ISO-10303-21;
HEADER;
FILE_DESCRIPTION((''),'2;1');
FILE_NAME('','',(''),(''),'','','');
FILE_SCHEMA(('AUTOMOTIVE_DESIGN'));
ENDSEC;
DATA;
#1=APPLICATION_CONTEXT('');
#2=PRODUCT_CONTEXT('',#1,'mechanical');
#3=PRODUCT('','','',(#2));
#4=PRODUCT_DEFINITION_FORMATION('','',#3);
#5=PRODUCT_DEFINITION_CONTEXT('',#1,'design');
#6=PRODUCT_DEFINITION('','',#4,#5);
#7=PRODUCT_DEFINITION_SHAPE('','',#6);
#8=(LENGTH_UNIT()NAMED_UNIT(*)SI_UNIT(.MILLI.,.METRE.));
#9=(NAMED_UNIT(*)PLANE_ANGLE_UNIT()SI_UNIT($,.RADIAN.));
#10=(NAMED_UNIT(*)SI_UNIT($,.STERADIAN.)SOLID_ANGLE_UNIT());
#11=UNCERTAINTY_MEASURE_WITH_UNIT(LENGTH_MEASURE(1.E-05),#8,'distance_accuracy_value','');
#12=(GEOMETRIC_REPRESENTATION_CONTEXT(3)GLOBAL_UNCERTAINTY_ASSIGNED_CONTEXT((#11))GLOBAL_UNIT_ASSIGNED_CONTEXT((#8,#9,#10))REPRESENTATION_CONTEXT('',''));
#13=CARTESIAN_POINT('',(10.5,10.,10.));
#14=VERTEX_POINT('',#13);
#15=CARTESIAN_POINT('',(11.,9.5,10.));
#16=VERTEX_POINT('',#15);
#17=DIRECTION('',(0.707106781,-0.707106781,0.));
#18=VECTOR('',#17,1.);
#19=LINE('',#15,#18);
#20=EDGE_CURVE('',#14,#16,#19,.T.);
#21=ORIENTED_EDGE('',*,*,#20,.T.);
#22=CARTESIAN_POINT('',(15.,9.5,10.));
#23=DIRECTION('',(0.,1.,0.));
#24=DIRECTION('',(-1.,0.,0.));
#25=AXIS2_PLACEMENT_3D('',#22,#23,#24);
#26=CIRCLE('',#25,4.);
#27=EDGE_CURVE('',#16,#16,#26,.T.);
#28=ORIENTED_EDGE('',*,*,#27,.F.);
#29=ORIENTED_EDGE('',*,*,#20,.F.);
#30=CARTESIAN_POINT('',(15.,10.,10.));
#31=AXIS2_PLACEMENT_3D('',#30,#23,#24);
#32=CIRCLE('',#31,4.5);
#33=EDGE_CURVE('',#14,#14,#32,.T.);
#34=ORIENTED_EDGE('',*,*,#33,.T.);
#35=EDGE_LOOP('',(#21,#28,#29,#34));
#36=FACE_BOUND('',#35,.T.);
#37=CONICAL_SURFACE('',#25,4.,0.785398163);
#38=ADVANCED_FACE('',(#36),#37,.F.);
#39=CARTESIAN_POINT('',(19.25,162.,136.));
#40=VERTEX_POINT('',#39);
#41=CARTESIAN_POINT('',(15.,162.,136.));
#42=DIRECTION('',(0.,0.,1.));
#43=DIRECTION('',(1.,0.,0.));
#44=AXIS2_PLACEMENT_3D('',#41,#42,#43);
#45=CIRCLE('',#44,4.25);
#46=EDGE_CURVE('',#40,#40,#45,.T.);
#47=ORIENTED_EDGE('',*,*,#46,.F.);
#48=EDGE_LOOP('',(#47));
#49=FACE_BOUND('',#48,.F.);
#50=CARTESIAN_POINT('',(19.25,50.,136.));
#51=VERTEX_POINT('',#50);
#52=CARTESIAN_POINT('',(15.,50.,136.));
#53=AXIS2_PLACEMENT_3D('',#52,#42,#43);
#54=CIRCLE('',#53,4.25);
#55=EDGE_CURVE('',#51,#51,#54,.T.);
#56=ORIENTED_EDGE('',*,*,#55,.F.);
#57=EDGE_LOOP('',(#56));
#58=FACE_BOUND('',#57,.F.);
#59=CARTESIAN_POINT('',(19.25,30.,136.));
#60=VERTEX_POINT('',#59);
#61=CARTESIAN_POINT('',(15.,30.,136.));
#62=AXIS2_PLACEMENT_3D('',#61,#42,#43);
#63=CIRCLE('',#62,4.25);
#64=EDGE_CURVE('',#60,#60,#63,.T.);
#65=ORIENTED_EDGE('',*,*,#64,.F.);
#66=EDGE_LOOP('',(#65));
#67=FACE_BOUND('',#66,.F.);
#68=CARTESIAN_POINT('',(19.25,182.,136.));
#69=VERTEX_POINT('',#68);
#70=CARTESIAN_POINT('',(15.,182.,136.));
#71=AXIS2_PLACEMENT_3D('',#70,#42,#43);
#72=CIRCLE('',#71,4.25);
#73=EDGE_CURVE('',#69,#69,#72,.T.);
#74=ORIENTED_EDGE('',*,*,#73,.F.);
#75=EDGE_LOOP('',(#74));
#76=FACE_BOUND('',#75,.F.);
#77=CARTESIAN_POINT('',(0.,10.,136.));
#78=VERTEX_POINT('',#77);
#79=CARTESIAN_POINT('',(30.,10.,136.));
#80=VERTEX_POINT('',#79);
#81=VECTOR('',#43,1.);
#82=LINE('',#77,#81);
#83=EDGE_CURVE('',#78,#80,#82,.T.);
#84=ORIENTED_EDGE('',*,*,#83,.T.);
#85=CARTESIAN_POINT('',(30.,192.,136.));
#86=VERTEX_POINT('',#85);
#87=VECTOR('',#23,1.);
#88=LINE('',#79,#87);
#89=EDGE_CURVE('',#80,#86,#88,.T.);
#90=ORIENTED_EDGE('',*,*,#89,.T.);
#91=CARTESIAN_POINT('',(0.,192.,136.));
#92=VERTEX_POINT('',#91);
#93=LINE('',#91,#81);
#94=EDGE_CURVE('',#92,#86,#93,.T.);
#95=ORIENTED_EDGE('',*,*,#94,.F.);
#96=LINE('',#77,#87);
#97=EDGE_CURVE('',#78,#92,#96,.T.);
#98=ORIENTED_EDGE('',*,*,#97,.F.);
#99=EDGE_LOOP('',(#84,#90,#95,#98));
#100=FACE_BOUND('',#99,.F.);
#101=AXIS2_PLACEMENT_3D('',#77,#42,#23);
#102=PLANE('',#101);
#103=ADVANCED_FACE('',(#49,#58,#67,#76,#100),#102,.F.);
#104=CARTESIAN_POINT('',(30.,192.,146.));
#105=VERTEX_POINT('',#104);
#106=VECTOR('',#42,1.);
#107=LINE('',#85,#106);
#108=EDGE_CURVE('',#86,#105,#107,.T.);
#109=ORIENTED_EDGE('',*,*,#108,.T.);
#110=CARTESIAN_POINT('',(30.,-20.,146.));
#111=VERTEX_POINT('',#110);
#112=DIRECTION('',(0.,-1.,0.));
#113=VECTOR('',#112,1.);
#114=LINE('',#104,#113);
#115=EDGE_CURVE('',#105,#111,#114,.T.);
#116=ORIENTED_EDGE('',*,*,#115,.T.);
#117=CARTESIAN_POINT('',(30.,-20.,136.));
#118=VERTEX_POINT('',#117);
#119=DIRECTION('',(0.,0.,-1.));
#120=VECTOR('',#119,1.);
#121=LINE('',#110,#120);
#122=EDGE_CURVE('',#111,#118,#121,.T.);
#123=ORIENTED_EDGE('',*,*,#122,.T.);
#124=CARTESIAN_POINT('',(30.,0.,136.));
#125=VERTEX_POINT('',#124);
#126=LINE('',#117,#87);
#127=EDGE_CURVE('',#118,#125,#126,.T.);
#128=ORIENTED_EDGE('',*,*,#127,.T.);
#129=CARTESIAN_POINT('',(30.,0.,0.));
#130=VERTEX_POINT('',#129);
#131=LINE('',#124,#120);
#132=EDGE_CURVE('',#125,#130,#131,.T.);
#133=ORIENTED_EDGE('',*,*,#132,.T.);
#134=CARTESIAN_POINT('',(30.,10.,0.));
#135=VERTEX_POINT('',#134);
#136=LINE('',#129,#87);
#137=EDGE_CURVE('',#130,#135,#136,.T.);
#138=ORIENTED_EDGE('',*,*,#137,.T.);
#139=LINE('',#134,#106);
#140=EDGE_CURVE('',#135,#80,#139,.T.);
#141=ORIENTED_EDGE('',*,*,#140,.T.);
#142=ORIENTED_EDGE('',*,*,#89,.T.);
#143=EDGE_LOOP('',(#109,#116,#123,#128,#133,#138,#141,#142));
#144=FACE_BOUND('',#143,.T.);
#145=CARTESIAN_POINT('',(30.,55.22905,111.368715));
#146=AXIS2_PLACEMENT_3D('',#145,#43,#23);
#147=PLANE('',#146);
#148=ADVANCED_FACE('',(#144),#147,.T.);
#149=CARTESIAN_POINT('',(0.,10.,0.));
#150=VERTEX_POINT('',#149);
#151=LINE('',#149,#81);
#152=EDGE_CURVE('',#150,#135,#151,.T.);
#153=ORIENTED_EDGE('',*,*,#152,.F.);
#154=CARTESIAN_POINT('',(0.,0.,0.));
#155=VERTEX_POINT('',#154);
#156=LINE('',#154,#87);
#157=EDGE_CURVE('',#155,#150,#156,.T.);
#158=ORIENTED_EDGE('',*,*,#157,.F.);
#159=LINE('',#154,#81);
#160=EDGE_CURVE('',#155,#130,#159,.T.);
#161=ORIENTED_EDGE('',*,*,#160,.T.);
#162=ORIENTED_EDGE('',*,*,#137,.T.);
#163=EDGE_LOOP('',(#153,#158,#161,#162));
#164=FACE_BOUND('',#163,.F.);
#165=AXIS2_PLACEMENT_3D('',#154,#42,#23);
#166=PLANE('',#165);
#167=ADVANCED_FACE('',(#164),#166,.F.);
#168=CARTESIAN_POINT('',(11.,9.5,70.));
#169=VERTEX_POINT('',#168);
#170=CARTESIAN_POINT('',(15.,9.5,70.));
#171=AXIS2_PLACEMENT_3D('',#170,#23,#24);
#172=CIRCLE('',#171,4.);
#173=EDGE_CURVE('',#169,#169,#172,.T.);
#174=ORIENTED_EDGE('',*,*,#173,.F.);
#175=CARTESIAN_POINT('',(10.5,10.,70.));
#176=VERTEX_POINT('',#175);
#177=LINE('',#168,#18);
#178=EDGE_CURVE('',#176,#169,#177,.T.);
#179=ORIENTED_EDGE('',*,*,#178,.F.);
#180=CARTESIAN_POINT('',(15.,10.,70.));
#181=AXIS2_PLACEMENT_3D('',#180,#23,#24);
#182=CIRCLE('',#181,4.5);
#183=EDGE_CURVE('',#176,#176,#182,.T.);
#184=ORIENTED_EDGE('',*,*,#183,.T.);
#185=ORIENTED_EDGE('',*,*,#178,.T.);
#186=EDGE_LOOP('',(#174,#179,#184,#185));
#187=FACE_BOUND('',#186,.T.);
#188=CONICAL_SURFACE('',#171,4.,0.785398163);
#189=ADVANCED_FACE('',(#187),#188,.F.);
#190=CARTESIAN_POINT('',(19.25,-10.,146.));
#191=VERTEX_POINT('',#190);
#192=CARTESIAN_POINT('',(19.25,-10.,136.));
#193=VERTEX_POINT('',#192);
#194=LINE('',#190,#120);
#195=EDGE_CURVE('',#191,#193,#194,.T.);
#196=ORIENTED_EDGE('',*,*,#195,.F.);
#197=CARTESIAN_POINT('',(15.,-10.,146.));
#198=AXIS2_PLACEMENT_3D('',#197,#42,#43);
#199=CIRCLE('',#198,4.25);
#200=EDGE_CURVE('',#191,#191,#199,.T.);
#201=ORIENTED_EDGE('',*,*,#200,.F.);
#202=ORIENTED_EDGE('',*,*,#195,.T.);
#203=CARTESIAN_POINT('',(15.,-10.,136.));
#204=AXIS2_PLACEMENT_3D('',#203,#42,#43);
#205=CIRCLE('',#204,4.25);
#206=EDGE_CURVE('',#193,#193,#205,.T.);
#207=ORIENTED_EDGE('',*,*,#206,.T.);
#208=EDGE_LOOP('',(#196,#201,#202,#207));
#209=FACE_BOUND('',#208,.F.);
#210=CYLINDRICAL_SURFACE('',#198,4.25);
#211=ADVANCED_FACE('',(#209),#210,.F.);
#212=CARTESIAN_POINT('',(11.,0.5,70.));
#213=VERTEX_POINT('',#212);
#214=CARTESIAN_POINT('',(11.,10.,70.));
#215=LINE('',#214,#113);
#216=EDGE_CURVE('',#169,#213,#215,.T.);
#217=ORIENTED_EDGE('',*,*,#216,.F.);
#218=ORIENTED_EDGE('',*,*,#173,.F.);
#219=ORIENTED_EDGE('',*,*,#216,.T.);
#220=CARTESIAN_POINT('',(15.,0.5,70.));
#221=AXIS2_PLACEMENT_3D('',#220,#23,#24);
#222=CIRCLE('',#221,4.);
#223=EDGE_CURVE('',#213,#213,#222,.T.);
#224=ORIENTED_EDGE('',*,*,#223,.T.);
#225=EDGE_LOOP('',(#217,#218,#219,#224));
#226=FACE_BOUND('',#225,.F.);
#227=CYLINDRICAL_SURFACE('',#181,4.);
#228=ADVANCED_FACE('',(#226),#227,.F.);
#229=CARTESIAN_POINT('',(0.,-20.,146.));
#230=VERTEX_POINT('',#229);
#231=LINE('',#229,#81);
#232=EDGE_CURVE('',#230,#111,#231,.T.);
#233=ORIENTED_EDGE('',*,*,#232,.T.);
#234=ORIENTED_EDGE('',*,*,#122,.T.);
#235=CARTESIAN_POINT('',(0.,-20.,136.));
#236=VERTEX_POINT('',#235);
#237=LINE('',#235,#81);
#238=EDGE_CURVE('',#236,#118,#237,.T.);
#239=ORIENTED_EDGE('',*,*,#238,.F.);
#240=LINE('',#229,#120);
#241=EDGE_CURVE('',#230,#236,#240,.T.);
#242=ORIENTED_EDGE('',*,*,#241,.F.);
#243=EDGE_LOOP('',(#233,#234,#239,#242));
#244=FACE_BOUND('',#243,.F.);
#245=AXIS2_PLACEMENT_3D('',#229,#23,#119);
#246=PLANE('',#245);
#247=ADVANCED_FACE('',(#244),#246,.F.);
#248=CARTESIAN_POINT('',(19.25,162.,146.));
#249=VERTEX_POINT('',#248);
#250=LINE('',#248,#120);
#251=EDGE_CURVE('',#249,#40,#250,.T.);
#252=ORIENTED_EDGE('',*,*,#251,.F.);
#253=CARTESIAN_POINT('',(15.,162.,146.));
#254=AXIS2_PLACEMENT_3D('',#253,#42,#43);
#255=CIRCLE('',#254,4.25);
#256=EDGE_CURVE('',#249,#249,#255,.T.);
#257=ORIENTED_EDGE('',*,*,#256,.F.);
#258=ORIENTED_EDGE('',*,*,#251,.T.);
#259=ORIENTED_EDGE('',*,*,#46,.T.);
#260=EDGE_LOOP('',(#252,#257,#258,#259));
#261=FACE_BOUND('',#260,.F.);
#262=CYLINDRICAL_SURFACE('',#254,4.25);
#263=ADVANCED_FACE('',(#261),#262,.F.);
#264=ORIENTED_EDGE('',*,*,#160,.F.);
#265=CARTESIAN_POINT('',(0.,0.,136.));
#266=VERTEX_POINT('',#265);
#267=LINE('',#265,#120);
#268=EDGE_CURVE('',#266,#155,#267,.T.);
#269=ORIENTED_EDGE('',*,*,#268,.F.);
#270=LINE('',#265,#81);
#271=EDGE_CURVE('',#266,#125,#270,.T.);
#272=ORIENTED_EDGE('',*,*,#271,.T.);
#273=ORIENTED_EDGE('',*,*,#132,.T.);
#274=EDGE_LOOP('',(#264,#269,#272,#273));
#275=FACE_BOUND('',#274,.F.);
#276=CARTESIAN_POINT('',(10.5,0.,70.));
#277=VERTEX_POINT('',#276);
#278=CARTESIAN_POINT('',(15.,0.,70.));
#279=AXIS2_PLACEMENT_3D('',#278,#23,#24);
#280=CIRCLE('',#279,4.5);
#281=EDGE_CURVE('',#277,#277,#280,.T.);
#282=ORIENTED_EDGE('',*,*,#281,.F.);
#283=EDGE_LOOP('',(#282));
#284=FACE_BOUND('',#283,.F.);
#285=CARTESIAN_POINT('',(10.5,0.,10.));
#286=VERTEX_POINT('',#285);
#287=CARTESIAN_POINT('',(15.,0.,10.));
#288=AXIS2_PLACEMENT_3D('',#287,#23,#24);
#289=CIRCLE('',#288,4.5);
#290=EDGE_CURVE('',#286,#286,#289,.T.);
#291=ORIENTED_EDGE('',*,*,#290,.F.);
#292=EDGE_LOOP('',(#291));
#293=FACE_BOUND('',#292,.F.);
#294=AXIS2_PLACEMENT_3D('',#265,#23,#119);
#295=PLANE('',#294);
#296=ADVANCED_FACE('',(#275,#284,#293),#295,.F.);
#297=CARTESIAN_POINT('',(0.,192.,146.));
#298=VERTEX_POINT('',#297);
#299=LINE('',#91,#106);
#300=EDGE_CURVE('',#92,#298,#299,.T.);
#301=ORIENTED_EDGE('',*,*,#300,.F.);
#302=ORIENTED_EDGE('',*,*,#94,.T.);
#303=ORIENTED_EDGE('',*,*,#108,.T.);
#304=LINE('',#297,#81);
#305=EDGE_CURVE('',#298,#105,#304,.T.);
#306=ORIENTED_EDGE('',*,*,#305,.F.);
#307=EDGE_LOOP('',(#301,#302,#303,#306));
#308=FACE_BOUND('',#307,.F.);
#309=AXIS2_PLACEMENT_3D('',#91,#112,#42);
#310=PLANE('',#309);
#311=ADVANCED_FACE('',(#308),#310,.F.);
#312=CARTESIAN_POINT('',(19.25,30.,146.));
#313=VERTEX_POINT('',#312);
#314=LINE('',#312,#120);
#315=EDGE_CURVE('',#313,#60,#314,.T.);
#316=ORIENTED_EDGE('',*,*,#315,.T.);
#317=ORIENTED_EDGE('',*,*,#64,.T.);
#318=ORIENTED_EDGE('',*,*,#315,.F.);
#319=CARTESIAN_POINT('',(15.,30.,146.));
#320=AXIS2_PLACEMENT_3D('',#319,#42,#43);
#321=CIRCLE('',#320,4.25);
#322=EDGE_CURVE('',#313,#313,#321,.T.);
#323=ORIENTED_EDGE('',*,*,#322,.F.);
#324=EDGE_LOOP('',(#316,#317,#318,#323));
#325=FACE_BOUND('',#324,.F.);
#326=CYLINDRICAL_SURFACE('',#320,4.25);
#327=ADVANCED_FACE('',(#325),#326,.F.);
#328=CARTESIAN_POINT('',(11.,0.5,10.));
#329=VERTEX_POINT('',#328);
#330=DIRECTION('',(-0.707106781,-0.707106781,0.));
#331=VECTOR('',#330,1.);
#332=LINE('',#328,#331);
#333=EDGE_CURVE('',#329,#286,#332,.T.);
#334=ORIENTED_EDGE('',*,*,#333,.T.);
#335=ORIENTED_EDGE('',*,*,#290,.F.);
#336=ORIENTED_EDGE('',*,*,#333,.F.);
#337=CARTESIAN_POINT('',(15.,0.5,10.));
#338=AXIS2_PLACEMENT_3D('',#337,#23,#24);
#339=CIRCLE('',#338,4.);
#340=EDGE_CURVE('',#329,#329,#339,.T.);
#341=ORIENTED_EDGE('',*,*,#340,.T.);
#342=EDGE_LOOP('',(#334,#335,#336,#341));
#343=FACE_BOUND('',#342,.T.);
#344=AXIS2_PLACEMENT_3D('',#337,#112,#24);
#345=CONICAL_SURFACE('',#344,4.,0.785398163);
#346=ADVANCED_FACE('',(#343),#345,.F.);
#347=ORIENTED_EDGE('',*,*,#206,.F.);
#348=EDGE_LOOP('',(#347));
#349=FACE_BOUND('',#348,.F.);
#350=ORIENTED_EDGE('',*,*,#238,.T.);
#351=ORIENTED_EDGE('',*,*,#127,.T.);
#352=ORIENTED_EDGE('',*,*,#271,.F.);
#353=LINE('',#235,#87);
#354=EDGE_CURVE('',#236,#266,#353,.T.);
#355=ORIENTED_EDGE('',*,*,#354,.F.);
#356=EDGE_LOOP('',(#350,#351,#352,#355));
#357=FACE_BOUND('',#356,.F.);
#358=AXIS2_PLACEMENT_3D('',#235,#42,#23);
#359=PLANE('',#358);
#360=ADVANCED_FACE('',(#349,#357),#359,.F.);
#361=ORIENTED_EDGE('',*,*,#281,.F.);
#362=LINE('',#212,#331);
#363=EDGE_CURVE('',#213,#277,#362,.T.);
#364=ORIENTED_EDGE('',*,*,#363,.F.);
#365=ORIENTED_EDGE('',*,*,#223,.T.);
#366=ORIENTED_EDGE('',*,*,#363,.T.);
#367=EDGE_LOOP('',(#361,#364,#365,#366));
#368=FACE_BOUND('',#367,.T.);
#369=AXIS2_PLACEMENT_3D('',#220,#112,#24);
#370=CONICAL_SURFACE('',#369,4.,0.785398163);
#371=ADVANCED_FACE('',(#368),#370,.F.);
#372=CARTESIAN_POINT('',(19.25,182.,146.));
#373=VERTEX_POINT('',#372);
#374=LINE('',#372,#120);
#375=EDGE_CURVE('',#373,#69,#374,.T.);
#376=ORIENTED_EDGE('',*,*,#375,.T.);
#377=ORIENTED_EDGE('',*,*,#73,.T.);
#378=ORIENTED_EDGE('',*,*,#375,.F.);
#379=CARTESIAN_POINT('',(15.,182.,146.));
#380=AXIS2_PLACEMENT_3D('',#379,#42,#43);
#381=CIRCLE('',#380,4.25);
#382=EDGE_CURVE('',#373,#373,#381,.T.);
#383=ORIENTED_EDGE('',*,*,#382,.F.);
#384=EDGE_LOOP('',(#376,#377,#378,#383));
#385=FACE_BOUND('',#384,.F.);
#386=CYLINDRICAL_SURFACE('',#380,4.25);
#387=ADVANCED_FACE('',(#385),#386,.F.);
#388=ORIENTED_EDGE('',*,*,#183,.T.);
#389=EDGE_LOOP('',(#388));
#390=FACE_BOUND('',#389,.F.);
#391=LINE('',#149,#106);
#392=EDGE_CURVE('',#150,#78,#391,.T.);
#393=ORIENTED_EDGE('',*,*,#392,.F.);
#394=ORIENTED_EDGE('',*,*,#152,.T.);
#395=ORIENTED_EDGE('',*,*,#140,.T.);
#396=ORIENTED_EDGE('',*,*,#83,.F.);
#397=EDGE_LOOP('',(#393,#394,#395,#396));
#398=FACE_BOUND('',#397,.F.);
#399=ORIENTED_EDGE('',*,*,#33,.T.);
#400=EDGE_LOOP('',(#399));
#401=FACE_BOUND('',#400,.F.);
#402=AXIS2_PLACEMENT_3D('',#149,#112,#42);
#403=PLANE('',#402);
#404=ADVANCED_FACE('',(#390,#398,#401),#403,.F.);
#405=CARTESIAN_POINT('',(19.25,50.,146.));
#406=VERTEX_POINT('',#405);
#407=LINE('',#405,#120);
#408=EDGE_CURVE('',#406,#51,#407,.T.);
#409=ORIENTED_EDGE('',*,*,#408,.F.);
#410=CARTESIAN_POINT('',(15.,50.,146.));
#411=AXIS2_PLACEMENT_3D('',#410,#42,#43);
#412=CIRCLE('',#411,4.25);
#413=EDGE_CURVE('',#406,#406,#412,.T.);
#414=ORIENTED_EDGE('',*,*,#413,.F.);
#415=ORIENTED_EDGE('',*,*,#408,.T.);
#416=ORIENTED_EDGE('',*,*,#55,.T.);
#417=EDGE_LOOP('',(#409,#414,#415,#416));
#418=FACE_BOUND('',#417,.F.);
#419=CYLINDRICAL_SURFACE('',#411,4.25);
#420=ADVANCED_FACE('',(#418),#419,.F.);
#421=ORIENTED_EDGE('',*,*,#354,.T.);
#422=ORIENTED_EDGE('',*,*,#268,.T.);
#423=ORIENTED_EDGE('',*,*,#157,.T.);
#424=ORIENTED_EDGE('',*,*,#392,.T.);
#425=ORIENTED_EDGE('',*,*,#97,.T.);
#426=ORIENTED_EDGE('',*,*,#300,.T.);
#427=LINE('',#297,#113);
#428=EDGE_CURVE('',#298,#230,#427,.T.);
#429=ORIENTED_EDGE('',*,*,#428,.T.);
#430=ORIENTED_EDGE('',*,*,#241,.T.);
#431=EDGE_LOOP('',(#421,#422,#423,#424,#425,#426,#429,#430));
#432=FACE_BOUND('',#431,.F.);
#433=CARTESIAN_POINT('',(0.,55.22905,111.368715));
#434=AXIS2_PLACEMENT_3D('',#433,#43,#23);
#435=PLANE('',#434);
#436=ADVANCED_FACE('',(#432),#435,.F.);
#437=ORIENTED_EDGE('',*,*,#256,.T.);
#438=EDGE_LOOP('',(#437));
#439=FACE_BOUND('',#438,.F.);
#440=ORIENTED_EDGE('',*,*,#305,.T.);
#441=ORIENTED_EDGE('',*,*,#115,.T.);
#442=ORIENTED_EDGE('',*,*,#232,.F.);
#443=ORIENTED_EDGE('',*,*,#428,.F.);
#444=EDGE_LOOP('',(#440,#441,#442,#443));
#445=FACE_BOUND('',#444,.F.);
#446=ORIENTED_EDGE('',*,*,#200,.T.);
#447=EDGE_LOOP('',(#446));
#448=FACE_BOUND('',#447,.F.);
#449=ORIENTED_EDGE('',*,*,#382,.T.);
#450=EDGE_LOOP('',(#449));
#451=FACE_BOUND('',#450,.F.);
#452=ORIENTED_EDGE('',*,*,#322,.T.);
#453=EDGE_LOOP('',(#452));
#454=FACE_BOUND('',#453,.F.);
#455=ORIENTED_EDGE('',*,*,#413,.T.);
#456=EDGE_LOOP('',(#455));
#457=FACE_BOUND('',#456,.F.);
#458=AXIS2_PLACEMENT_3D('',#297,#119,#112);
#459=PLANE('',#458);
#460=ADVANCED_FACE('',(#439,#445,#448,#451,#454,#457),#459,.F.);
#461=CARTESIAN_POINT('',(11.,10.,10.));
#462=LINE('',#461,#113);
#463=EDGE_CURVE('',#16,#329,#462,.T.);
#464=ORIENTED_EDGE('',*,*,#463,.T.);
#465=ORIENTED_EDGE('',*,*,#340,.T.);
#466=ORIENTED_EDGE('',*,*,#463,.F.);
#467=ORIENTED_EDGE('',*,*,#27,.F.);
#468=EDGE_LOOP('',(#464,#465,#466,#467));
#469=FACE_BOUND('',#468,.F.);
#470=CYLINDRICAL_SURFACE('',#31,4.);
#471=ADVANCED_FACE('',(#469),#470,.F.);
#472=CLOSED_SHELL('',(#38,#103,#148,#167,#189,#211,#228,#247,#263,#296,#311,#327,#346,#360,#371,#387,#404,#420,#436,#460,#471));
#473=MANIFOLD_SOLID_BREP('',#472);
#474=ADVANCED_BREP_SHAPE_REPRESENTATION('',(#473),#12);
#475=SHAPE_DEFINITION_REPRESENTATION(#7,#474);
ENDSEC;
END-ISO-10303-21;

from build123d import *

# Parameters (mm, degrees)
F1_DEPTH = 30
F2_R     = 4
F3_DEPTH = 30.001
F4_SIZE  = 0.5
F5_R     = 4.25
F6_DEPTH = 146.001


with BuildPart() as f1:
    # F0 (on Right) → F1 (new body)
    with BuildSketch(Plane.YZ):
        Polygon((10, 0), (10, 136), (192, 136), (192, 146), (0, 146), (-20, 146), (-20, 136), (0, 136), (0, 0), align=None)
    extrude(amount=F1_DEPTH)

    # F2 (on face) → F3 (cut, through all)
    with BuildSketch(Plane(origin=(0, 10, 0), x_dir=(-1, 0, 0), z_dir=(0, 1, 0))):
        with Locations((-15, 70)):
            Circle(F2_R)
        with Locations((-15, 10)):
            Circle(F2_R)
    extrude(amount=-F3_DEPTH, mode=Mode.SUBTRACT)

    # F4
    f4_edges = [f1.edges().sort_by_distance(p)[0] for p in [
        (19, 10, 70),
        (11, 5, 70),
        (19, 0, 70),
        (19, 10, 10),
        (11, 5, 10),
        (19, 0, 10),
    ]]
    chamfer(f4_edges, length=F4_SIZE)

    # F5 (on face) → F6 (cut, through all)
    with BuildSketch(Plane.XY.offset(146)):
        with Locations((15, 182)):
            Circle(F5_R)
        with Locations((15, 162)):
            Circle(F5_R)
        with Locations((15, -10)):
            Circle(F5_R)
        with Locations((15, 30)):
            Circle(F5_R)
        with Locations((15, 50)):
            Circle(F5_R)
    extrude(amount=-F6_DEPTH, mode=Mode.SUBTRACT)


solid = f1.part
